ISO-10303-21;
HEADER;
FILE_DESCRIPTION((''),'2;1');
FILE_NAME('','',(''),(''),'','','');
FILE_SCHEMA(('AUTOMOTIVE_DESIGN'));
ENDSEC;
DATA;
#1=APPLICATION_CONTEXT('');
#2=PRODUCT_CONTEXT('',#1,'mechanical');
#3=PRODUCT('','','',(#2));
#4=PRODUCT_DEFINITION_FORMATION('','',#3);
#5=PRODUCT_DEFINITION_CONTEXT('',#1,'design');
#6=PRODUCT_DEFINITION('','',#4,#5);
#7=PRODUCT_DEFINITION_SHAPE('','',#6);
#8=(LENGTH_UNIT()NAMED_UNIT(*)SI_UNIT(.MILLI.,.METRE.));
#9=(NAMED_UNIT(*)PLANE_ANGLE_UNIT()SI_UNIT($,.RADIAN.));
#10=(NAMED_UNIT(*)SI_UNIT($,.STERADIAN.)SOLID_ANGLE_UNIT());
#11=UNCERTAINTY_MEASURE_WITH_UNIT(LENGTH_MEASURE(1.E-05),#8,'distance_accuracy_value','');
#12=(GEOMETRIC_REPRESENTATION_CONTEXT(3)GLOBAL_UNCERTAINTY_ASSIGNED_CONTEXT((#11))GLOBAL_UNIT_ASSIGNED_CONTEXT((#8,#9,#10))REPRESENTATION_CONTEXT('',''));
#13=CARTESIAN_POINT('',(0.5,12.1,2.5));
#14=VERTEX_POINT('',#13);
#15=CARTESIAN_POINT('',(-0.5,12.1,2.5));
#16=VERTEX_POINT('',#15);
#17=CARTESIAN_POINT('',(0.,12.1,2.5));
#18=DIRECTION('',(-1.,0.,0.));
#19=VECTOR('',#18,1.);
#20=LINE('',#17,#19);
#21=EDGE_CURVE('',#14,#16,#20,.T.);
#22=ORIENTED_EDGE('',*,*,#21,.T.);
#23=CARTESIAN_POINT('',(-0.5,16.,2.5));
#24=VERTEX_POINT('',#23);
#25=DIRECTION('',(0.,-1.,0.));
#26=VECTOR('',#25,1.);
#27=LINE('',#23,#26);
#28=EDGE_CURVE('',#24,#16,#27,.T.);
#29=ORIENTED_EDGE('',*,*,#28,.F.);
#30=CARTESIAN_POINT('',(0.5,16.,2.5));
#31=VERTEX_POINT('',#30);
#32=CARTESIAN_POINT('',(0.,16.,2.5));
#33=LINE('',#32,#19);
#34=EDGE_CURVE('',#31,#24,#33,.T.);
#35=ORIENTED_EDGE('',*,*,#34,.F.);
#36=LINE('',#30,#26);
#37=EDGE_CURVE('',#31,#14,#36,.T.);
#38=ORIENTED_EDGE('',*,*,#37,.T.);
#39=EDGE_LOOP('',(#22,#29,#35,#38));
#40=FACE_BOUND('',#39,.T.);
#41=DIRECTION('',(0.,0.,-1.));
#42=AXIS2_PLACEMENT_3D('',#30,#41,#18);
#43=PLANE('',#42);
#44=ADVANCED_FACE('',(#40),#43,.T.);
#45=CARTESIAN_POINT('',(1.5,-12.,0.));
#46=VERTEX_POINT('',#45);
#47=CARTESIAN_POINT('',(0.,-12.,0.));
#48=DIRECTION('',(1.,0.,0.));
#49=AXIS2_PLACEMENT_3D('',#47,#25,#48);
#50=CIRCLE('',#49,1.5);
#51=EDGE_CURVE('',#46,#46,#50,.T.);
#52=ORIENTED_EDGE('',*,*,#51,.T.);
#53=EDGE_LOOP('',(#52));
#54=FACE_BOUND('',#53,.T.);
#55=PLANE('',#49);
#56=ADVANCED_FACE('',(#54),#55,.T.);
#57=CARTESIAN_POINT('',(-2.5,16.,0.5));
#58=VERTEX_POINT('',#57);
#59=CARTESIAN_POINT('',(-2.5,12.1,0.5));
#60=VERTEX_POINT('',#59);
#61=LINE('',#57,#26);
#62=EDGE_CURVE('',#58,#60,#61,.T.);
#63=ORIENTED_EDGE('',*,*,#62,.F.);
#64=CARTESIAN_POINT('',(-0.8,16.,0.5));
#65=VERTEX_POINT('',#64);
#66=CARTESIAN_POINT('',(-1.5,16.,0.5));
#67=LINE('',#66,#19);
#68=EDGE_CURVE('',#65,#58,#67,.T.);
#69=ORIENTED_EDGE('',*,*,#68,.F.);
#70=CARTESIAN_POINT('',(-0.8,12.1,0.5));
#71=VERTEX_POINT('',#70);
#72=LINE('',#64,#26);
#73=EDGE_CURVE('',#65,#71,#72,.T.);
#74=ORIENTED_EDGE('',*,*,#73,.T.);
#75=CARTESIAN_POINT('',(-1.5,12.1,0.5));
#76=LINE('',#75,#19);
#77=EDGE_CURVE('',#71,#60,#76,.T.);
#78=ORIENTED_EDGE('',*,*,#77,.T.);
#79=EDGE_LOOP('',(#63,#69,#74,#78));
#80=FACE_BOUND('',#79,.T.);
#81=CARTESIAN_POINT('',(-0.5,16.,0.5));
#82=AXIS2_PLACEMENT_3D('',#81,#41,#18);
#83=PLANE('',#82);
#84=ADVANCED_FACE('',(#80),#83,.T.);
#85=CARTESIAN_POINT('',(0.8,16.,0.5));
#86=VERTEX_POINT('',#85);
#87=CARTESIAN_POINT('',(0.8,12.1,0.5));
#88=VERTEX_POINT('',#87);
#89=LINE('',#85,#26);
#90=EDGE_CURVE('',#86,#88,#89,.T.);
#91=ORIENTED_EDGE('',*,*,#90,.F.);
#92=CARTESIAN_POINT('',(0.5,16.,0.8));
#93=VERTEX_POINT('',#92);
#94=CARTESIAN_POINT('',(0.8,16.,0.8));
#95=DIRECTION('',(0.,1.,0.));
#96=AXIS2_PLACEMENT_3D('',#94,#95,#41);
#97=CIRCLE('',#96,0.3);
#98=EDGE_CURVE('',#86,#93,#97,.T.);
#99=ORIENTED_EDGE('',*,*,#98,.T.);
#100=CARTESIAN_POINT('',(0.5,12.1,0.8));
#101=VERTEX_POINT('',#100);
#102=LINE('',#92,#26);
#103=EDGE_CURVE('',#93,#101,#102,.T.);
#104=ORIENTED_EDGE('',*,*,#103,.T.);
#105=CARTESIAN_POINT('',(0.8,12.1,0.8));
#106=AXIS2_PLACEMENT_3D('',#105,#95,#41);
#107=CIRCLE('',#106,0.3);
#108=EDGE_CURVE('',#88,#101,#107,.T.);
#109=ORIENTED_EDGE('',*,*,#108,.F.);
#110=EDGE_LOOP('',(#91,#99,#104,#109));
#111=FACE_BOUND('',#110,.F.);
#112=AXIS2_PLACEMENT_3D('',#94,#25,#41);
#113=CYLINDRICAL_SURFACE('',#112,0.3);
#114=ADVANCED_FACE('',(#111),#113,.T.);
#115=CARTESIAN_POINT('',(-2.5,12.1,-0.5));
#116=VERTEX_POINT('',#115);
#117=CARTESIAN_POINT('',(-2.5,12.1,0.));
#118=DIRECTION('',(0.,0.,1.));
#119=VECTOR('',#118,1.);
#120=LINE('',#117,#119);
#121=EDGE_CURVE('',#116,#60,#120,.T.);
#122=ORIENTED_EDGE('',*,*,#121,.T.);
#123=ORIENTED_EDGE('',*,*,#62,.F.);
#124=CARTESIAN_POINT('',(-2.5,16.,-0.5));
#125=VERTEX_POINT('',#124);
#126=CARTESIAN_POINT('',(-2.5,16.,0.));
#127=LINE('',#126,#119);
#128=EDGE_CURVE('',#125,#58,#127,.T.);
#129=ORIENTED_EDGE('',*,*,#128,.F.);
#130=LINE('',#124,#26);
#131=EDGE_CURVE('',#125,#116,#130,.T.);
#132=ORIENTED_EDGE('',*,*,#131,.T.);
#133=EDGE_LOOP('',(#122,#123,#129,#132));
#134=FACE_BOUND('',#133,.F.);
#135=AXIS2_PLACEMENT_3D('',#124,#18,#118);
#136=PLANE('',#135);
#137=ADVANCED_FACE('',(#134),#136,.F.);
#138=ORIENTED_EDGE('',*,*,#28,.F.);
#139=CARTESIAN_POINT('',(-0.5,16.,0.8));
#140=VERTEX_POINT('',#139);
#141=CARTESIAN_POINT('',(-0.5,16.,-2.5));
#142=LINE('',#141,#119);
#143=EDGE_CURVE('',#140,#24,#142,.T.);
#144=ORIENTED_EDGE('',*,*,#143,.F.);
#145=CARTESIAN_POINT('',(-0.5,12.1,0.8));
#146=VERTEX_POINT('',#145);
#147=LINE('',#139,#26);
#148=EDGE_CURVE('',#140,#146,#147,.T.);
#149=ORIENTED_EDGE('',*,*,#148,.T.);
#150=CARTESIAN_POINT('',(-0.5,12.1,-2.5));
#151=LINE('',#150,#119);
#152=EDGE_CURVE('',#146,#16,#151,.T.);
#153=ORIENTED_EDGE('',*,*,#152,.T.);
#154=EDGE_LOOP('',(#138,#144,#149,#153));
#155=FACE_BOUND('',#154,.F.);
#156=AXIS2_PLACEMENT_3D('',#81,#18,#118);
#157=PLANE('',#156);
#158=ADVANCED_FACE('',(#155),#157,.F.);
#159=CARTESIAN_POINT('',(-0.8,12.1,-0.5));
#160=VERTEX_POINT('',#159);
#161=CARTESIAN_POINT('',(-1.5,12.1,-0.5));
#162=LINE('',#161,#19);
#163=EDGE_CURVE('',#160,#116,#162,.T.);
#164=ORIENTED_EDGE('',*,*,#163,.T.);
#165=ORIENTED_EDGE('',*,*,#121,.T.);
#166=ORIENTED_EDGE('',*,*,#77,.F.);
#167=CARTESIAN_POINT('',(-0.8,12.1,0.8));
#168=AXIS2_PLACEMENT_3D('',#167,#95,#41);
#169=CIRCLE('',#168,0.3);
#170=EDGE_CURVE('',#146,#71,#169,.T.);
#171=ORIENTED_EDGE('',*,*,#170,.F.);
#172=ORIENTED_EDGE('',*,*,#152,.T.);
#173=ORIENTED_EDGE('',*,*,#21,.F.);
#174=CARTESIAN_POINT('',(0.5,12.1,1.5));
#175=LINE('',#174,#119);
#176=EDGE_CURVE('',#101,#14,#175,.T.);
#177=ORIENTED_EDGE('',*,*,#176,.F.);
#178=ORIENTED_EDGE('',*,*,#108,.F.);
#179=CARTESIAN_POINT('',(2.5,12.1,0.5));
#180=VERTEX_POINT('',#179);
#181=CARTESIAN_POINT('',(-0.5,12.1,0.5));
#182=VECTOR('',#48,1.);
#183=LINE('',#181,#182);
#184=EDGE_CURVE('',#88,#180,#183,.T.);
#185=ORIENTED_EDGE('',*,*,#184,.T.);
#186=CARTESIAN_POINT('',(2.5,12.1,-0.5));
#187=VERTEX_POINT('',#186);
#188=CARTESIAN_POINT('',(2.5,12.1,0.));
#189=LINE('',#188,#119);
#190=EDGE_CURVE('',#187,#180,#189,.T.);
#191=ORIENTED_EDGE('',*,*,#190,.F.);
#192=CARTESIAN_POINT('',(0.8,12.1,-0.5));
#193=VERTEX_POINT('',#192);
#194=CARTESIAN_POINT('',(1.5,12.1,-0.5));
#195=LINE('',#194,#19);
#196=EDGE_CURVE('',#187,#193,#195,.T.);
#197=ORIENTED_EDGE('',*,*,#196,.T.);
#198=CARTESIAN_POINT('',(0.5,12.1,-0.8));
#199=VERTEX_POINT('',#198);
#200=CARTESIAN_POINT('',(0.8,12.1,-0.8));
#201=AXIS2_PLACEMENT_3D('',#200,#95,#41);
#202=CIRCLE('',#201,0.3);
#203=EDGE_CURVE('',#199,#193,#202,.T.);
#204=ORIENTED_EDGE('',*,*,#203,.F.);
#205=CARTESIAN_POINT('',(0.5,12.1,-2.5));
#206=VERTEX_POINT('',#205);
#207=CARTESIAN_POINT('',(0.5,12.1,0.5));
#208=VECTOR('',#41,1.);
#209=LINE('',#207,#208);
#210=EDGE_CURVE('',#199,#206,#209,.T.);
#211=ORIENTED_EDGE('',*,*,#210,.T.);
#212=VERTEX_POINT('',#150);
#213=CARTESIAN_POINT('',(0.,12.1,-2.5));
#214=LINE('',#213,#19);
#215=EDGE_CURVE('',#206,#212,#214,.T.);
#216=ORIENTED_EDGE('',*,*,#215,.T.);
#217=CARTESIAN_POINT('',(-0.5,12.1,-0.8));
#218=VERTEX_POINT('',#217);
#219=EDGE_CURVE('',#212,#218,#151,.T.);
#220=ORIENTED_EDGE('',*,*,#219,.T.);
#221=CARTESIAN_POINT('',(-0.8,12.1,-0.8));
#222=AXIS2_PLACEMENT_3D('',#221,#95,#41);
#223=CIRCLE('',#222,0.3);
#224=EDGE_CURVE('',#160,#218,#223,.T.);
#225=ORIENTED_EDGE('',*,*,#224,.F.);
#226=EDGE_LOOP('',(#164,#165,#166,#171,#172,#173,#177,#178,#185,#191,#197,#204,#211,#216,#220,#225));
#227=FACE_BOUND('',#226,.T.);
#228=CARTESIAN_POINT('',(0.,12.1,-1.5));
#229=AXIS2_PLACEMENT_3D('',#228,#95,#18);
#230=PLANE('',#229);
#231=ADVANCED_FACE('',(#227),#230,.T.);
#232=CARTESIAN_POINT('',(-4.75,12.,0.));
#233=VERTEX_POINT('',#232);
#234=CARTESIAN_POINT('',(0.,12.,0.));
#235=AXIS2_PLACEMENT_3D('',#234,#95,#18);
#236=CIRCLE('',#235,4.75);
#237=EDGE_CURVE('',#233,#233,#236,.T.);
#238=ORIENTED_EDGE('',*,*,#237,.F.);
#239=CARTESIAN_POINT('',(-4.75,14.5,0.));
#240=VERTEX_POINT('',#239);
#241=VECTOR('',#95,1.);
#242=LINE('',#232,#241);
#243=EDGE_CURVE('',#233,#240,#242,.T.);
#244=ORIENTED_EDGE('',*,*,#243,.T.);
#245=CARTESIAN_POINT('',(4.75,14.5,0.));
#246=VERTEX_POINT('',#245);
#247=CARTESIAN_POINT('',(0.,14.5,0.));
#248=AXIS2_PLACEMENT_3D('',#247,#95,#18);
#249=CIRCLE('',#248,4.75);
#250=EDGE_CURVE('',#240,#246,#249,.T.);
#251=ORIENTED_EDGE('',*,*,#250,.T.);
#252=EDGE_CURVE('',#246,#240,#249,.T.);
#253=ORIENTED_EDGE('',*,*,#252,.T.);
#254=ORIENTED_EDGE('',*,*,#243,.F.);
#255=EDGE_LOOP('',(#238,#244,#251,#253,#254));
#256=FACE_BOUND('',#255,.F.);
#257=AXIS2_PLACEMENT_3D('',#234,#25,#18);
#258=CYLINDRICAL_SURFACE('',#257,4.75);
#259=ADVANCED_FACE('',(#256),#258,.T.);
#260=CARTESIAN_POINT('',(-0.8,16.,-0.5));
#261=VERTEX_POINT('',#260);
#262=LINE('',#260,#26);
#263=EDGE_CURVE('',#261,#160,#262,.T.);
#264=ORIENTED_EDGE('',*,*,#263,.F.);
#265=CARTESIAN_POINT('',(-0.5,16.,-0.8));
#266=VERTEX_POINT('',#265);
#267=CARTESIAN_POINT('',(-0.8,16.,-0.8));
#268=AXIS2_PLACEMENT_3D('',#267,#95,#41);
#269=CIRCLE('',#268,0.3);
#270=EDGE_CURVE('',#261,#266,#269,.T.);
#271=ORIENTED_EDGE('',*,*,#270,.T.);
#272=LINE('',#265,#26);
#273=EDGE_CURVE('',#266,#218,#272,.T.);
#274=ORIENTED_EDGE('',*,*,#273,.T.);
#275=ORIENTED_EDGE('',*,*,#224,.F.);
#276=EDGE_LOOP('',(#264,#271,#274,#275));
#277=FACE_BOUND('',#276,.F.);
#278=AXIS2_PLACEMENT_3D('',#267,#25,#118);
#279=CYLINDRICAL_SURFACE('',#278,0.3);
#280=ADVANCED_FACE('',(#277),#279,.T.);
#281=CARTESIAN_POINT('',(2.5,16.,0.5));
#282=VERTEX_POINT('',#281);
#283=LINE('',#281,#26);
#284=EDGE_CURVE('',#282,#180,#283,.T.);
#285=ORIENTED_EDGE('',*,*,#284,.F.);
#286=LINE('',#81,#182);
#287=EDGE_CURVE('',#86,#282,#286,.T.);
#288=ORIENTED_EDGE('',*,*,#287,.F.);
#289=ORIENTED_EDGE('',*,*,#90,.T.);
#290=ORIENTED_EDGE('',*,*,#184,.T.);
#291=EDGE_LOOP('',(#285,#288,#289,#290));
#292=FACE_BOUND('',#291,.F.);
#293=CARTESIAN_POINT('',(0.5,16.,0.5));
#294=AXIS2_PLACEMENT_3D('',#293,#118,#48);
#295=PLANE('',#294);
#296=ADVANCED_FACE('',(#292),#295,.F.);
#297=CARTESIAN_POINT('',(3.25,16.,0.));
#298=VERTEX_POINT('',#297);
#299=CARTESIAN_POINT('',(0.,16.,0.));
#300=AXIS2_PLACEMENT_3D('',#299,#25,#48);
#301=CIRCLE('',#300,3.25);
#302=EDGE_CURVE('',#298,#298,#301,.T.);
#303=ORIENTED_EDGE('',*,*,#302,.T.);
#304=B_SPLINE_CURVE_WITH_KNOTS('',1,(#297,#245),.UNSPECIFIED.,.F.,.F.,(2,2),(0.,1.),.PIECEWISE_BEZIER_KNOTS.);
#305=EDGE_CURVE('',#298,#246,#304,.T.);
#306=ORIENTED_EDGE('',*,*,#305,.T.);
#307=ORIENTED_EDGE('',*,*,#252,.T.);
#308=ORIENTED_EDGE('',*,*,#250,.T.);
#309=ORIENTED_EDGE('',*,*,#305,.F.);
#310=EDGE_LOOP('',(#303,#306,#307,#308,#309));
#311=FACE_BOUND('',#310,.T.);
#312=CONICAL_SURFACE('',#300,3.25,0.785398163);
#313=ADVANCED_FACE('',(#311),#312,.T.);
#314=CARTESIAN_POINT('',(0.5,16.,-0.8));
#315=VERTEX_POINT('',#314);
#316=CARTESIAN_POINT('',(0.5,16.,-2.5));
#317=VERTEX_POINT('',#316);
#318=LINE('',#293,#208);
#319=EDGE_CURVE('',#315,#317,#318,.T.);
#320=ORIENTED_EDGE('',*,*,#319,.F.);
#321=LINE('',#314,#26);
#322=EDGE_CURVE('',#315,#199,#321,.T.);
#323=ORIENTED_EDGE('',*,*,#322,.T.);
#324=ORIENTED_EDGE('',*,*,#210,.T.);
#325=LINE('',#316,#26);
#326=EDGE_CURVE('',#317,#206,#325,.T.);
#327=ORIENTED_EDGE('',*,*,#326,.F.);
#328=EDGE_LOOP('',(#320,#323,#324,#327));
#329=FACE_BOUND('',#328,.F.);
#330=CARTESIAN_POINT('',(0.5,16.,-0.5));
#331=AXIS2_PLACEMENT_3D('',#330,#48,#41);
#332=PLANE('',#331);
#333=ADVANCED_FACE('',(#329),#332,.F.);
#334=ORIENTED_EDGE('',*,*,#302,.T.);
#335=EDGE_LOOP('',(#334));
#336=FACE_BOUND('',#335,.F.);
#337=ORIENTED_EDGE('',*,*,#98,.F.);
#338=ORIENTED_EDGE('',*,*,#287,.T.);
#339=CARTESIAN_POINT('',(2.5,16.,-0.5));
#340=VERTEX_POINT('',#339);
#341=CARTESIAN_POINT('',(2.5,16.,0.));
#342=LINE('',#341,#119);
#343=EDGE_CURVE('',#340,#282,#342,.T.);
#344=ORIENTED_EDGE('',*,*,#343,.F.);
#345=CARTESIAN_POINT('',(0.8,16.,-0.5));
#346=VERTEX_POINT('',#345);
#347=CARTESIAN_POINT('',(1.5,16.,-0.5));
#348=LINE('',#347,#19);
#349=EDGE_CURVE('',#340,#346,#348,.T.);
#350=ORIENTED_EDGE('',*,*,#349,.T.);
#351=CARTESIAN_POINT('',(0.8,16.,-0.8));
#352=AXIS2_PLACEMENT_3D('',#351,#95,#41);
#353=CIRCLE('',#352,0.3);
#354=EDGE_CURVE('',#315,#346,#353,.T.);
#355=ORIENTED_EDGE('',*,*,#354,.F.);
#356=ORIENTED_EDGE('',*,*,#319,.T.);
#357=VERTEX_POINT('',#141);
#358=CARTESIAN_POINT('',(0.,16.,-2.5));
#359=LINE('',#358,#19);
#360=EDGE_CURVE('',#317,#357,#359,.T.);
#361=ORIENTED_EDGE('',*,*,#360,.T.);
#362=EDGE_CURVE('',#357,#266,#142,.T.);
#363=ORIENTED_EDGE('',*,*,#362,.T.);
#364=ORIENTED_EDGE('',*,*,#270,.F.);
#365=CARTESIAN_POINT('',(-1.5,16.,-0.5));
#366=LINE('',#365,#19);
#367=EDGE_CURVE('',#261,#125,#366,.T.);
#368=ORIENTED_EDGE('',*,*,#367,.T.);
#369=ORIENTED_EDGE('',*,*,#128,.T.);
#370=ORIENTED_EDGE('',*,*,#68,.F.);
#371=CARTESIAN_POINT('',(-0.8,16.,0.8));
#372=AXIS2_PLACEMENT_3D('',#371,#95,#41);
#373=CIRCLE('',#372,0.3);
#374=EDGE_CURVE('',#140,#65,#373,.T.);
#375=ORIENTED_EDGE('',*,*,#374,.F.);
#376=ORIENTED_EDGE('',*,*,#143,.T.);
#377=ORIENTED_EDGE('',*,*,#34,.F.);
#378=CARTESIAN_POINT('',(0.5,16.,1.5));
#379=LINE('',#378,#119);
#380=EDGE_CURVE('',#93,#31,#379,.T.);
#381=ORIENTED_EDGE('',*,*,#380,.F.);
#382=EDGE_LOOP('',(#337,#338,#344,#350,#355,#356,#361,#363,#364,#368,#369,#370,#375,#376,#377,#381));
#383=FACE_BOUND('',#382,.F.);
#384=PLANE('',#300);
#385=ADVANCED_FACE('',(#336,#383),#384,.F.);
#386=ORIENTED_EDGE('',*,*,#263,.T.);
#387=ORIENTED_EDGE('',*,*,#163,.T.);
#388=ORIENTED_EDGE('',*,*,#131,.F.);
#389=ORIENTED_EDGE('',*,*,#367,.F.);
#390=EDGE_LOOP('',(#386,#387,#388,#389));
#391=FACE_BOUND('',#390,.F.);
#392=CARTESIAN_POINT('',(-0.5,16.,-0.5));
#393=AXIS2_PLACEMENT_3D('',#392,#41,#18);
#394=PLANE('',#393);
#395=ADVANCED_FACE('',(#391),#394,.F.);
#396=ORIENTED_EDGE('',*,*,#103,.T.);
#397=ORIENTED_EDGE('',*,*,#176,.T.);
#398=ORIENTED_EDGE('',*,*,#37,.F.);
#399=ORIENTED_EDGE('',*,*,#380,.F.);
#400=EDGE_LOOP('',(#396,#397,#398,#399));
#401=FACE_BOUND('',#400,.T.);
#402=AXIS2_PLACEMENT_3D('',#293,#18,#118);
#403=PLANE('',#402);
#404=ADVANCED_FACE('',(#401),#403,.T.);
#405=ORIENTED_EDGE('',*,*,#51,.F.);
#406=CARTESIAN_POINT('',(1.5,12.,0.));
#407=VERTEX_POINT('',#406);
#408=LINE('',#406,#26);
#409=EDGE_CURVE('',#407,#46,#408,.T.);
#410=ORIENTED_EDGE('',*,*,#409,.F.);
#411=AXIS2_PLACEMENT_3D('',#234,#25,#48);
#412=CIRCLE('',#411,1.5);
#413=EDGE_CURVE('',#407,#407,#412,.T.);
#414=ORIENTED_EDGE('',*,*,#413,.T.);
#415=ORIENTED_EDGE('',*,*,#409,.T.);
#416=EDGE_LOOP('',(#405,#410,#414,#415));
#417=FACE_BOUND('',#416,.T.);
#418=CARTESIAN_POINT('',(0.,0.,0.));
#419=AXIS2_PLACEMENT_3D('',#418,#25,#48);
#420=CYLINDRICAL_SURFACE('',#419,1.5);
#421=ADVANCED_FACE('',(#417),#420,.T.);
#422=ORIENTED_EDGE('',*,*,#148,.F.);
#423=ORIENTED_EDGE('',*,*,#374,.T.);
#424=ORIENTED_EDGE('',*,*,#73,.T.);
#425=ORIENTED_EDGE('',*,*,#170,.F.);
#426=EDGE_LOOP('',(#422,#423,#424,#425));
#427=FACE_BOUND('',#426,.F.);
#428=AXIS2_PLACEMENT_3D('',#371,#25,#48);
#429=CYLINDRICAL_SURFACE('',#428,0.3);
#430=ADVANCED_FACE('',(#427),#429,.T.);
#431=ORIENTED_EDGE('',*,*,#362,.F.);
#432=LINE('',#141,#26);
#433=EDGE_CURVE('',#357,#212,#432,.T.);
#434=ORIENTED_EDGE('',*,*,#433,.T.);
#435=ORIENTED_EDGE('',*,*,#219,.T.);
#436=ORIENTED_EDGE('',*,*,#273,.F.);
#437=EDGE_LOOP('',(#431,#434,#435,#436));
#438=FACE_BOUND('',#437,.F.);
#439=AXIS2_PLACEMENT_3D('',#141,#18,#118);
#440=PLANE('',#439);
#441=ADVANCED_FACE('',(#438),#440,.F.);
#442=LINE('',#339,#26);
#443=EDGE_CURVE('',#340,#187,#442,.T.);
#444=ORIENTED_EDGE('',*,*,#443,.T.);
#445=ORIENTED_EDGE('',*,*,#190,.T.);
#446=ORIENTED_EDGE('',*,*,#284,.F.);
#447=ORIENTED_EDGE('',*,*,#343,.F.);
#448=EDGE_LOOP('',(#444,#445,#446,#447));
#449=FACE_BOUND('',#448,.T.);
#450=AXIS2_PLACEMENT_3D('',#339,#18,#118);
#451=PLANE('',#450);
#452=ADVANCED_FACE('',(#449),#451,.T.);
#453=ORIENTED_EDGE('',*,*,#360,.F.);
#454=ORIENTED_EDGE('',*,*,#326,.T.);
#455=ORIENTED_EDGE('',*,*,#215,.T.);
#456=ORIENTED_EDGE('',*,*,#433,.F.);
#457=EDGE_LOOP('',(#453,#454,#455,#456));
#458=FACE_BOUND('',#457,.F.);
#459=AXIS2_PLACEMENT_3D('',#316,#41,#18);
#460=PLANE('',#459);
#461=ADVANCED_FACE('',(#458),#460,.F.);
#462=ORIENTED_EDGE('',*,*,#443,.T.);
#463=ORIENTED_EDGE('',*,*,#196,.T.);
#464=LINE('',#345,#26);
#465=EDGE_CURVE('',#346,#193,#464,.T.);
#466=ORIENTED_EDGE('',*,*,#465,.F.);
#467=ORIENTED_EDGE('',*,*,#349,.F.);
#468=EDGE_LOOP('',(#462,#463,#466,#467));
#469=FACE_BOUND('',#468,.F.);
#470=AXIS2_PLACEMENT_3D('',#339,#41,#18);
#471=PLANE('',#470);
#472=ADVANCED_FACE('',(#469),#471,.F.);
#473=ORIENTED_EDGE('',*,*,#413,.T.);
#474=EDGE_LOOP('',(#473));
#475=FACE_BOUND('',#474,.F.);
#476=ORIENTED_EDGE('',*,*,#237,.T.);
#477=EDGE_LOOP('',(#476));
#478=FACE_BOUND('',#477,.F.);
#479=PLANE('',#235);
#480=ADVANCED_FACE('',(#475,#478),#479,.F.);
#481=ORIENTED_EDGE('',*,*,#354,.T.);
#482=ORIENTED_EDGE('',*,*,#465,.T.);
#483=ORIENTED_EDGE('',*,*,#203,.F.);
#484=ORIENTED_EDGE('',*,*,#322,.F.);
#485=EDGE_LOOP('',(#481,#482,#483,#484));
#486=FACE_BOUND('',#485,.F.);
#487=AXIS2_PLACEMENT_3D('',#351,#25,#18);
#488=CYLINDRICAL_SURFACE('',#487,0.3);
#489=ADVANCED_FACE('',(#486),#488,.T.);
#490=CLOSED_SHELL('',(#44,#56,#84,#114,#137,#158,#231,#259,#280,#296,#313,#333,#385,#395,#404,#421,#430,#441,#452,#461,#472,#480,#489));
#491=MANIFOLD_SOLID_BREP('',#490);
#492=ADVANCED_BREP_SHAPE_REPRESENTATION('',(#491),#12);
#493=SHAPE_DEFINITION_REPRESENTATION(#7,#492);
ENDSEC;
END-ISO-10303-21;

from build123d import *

# Parameters (mm, degrees)
F0_R      = 1.5
F1_DEPTH  = 12
F2_R      = 4.75
F2_R_2    = 1.5
F3_DEPTH  = 2.5
F5_R      = 3.25
F3_FACE_R = 4.75
F7_W      = 1
F7_H      = 2
F7_H_2    = 1
F7_W_2    = 2
F8_DEPTH  = 3.9
F9_R      = 0.3


with BuildPart() as f1:
    # F0 (on Front) → F1 (new body, symmetric)
    with BuildSketch(Plane.XZ):
        Circle(F0_R)
    extrude(amount=F1_DEPTH, both=True)

    # F2 (on face) → F3 (join)
    with BuildSketch(Plane(origin=(0, 12, 0), x_dir=(-1, 0, 0), z_dir=(0, 1, 0))):
        Circle(F2_R)
        Circle(F2_R_2, mode=Mode.SUBTRACT)
        Circle(F2_R_2)
    extrude(amount=F3_DEPTH)

    # F5 (on offset) → F6 section 0
    with BuildSketch(Plane.XZ.offset(-16)):
        Circle(F5_R)
    # F3_face (on face) → F6 section 1
    with BuildSketch(Plane(origin=(0, 14.5, 0), x_dir=(-1, 0, 0), z_dir=(0, 1, 0))):
        Circle(F3_FACE_R)
    loft()

    # F7 (on face) → F8 (cut)
    with BuildSketch(Plane(origin=(0, 16, 0), x_dir=(-1, 0, 0), z_dir=(0, 1, 0))):
        with Locations((0, -1.5)):
            Rectangle(F7_W, F7_H)
        Rectangle(F7_W, F7_H_2)
        with Locations((-1.5, 0)):
            Rectangle(F7_W_2, F7_H_2)
        with Locations((0, 1.5)):
            Rectangle(F7_W, F7_H)
        with Locations((1.5, 0)):
            Rectangle(F7_W_2, F7_H_2)
    extrude(amount=-F8_DEPTH, mode=Mode.SUBTRACT)

    # F9
    f9_edges = [f1.edges().sort_by_distance(p)[0] for p in [
        (-0.5, 14.05, 0.5),
        (0.5, 14.05, 0.5),
        (0.5, 14.05, -0.5),
        (-0.5, 14.05, -0.5),
    ]]
    fillet(f9_edges, radius=F9_R)


solid = f1.part
